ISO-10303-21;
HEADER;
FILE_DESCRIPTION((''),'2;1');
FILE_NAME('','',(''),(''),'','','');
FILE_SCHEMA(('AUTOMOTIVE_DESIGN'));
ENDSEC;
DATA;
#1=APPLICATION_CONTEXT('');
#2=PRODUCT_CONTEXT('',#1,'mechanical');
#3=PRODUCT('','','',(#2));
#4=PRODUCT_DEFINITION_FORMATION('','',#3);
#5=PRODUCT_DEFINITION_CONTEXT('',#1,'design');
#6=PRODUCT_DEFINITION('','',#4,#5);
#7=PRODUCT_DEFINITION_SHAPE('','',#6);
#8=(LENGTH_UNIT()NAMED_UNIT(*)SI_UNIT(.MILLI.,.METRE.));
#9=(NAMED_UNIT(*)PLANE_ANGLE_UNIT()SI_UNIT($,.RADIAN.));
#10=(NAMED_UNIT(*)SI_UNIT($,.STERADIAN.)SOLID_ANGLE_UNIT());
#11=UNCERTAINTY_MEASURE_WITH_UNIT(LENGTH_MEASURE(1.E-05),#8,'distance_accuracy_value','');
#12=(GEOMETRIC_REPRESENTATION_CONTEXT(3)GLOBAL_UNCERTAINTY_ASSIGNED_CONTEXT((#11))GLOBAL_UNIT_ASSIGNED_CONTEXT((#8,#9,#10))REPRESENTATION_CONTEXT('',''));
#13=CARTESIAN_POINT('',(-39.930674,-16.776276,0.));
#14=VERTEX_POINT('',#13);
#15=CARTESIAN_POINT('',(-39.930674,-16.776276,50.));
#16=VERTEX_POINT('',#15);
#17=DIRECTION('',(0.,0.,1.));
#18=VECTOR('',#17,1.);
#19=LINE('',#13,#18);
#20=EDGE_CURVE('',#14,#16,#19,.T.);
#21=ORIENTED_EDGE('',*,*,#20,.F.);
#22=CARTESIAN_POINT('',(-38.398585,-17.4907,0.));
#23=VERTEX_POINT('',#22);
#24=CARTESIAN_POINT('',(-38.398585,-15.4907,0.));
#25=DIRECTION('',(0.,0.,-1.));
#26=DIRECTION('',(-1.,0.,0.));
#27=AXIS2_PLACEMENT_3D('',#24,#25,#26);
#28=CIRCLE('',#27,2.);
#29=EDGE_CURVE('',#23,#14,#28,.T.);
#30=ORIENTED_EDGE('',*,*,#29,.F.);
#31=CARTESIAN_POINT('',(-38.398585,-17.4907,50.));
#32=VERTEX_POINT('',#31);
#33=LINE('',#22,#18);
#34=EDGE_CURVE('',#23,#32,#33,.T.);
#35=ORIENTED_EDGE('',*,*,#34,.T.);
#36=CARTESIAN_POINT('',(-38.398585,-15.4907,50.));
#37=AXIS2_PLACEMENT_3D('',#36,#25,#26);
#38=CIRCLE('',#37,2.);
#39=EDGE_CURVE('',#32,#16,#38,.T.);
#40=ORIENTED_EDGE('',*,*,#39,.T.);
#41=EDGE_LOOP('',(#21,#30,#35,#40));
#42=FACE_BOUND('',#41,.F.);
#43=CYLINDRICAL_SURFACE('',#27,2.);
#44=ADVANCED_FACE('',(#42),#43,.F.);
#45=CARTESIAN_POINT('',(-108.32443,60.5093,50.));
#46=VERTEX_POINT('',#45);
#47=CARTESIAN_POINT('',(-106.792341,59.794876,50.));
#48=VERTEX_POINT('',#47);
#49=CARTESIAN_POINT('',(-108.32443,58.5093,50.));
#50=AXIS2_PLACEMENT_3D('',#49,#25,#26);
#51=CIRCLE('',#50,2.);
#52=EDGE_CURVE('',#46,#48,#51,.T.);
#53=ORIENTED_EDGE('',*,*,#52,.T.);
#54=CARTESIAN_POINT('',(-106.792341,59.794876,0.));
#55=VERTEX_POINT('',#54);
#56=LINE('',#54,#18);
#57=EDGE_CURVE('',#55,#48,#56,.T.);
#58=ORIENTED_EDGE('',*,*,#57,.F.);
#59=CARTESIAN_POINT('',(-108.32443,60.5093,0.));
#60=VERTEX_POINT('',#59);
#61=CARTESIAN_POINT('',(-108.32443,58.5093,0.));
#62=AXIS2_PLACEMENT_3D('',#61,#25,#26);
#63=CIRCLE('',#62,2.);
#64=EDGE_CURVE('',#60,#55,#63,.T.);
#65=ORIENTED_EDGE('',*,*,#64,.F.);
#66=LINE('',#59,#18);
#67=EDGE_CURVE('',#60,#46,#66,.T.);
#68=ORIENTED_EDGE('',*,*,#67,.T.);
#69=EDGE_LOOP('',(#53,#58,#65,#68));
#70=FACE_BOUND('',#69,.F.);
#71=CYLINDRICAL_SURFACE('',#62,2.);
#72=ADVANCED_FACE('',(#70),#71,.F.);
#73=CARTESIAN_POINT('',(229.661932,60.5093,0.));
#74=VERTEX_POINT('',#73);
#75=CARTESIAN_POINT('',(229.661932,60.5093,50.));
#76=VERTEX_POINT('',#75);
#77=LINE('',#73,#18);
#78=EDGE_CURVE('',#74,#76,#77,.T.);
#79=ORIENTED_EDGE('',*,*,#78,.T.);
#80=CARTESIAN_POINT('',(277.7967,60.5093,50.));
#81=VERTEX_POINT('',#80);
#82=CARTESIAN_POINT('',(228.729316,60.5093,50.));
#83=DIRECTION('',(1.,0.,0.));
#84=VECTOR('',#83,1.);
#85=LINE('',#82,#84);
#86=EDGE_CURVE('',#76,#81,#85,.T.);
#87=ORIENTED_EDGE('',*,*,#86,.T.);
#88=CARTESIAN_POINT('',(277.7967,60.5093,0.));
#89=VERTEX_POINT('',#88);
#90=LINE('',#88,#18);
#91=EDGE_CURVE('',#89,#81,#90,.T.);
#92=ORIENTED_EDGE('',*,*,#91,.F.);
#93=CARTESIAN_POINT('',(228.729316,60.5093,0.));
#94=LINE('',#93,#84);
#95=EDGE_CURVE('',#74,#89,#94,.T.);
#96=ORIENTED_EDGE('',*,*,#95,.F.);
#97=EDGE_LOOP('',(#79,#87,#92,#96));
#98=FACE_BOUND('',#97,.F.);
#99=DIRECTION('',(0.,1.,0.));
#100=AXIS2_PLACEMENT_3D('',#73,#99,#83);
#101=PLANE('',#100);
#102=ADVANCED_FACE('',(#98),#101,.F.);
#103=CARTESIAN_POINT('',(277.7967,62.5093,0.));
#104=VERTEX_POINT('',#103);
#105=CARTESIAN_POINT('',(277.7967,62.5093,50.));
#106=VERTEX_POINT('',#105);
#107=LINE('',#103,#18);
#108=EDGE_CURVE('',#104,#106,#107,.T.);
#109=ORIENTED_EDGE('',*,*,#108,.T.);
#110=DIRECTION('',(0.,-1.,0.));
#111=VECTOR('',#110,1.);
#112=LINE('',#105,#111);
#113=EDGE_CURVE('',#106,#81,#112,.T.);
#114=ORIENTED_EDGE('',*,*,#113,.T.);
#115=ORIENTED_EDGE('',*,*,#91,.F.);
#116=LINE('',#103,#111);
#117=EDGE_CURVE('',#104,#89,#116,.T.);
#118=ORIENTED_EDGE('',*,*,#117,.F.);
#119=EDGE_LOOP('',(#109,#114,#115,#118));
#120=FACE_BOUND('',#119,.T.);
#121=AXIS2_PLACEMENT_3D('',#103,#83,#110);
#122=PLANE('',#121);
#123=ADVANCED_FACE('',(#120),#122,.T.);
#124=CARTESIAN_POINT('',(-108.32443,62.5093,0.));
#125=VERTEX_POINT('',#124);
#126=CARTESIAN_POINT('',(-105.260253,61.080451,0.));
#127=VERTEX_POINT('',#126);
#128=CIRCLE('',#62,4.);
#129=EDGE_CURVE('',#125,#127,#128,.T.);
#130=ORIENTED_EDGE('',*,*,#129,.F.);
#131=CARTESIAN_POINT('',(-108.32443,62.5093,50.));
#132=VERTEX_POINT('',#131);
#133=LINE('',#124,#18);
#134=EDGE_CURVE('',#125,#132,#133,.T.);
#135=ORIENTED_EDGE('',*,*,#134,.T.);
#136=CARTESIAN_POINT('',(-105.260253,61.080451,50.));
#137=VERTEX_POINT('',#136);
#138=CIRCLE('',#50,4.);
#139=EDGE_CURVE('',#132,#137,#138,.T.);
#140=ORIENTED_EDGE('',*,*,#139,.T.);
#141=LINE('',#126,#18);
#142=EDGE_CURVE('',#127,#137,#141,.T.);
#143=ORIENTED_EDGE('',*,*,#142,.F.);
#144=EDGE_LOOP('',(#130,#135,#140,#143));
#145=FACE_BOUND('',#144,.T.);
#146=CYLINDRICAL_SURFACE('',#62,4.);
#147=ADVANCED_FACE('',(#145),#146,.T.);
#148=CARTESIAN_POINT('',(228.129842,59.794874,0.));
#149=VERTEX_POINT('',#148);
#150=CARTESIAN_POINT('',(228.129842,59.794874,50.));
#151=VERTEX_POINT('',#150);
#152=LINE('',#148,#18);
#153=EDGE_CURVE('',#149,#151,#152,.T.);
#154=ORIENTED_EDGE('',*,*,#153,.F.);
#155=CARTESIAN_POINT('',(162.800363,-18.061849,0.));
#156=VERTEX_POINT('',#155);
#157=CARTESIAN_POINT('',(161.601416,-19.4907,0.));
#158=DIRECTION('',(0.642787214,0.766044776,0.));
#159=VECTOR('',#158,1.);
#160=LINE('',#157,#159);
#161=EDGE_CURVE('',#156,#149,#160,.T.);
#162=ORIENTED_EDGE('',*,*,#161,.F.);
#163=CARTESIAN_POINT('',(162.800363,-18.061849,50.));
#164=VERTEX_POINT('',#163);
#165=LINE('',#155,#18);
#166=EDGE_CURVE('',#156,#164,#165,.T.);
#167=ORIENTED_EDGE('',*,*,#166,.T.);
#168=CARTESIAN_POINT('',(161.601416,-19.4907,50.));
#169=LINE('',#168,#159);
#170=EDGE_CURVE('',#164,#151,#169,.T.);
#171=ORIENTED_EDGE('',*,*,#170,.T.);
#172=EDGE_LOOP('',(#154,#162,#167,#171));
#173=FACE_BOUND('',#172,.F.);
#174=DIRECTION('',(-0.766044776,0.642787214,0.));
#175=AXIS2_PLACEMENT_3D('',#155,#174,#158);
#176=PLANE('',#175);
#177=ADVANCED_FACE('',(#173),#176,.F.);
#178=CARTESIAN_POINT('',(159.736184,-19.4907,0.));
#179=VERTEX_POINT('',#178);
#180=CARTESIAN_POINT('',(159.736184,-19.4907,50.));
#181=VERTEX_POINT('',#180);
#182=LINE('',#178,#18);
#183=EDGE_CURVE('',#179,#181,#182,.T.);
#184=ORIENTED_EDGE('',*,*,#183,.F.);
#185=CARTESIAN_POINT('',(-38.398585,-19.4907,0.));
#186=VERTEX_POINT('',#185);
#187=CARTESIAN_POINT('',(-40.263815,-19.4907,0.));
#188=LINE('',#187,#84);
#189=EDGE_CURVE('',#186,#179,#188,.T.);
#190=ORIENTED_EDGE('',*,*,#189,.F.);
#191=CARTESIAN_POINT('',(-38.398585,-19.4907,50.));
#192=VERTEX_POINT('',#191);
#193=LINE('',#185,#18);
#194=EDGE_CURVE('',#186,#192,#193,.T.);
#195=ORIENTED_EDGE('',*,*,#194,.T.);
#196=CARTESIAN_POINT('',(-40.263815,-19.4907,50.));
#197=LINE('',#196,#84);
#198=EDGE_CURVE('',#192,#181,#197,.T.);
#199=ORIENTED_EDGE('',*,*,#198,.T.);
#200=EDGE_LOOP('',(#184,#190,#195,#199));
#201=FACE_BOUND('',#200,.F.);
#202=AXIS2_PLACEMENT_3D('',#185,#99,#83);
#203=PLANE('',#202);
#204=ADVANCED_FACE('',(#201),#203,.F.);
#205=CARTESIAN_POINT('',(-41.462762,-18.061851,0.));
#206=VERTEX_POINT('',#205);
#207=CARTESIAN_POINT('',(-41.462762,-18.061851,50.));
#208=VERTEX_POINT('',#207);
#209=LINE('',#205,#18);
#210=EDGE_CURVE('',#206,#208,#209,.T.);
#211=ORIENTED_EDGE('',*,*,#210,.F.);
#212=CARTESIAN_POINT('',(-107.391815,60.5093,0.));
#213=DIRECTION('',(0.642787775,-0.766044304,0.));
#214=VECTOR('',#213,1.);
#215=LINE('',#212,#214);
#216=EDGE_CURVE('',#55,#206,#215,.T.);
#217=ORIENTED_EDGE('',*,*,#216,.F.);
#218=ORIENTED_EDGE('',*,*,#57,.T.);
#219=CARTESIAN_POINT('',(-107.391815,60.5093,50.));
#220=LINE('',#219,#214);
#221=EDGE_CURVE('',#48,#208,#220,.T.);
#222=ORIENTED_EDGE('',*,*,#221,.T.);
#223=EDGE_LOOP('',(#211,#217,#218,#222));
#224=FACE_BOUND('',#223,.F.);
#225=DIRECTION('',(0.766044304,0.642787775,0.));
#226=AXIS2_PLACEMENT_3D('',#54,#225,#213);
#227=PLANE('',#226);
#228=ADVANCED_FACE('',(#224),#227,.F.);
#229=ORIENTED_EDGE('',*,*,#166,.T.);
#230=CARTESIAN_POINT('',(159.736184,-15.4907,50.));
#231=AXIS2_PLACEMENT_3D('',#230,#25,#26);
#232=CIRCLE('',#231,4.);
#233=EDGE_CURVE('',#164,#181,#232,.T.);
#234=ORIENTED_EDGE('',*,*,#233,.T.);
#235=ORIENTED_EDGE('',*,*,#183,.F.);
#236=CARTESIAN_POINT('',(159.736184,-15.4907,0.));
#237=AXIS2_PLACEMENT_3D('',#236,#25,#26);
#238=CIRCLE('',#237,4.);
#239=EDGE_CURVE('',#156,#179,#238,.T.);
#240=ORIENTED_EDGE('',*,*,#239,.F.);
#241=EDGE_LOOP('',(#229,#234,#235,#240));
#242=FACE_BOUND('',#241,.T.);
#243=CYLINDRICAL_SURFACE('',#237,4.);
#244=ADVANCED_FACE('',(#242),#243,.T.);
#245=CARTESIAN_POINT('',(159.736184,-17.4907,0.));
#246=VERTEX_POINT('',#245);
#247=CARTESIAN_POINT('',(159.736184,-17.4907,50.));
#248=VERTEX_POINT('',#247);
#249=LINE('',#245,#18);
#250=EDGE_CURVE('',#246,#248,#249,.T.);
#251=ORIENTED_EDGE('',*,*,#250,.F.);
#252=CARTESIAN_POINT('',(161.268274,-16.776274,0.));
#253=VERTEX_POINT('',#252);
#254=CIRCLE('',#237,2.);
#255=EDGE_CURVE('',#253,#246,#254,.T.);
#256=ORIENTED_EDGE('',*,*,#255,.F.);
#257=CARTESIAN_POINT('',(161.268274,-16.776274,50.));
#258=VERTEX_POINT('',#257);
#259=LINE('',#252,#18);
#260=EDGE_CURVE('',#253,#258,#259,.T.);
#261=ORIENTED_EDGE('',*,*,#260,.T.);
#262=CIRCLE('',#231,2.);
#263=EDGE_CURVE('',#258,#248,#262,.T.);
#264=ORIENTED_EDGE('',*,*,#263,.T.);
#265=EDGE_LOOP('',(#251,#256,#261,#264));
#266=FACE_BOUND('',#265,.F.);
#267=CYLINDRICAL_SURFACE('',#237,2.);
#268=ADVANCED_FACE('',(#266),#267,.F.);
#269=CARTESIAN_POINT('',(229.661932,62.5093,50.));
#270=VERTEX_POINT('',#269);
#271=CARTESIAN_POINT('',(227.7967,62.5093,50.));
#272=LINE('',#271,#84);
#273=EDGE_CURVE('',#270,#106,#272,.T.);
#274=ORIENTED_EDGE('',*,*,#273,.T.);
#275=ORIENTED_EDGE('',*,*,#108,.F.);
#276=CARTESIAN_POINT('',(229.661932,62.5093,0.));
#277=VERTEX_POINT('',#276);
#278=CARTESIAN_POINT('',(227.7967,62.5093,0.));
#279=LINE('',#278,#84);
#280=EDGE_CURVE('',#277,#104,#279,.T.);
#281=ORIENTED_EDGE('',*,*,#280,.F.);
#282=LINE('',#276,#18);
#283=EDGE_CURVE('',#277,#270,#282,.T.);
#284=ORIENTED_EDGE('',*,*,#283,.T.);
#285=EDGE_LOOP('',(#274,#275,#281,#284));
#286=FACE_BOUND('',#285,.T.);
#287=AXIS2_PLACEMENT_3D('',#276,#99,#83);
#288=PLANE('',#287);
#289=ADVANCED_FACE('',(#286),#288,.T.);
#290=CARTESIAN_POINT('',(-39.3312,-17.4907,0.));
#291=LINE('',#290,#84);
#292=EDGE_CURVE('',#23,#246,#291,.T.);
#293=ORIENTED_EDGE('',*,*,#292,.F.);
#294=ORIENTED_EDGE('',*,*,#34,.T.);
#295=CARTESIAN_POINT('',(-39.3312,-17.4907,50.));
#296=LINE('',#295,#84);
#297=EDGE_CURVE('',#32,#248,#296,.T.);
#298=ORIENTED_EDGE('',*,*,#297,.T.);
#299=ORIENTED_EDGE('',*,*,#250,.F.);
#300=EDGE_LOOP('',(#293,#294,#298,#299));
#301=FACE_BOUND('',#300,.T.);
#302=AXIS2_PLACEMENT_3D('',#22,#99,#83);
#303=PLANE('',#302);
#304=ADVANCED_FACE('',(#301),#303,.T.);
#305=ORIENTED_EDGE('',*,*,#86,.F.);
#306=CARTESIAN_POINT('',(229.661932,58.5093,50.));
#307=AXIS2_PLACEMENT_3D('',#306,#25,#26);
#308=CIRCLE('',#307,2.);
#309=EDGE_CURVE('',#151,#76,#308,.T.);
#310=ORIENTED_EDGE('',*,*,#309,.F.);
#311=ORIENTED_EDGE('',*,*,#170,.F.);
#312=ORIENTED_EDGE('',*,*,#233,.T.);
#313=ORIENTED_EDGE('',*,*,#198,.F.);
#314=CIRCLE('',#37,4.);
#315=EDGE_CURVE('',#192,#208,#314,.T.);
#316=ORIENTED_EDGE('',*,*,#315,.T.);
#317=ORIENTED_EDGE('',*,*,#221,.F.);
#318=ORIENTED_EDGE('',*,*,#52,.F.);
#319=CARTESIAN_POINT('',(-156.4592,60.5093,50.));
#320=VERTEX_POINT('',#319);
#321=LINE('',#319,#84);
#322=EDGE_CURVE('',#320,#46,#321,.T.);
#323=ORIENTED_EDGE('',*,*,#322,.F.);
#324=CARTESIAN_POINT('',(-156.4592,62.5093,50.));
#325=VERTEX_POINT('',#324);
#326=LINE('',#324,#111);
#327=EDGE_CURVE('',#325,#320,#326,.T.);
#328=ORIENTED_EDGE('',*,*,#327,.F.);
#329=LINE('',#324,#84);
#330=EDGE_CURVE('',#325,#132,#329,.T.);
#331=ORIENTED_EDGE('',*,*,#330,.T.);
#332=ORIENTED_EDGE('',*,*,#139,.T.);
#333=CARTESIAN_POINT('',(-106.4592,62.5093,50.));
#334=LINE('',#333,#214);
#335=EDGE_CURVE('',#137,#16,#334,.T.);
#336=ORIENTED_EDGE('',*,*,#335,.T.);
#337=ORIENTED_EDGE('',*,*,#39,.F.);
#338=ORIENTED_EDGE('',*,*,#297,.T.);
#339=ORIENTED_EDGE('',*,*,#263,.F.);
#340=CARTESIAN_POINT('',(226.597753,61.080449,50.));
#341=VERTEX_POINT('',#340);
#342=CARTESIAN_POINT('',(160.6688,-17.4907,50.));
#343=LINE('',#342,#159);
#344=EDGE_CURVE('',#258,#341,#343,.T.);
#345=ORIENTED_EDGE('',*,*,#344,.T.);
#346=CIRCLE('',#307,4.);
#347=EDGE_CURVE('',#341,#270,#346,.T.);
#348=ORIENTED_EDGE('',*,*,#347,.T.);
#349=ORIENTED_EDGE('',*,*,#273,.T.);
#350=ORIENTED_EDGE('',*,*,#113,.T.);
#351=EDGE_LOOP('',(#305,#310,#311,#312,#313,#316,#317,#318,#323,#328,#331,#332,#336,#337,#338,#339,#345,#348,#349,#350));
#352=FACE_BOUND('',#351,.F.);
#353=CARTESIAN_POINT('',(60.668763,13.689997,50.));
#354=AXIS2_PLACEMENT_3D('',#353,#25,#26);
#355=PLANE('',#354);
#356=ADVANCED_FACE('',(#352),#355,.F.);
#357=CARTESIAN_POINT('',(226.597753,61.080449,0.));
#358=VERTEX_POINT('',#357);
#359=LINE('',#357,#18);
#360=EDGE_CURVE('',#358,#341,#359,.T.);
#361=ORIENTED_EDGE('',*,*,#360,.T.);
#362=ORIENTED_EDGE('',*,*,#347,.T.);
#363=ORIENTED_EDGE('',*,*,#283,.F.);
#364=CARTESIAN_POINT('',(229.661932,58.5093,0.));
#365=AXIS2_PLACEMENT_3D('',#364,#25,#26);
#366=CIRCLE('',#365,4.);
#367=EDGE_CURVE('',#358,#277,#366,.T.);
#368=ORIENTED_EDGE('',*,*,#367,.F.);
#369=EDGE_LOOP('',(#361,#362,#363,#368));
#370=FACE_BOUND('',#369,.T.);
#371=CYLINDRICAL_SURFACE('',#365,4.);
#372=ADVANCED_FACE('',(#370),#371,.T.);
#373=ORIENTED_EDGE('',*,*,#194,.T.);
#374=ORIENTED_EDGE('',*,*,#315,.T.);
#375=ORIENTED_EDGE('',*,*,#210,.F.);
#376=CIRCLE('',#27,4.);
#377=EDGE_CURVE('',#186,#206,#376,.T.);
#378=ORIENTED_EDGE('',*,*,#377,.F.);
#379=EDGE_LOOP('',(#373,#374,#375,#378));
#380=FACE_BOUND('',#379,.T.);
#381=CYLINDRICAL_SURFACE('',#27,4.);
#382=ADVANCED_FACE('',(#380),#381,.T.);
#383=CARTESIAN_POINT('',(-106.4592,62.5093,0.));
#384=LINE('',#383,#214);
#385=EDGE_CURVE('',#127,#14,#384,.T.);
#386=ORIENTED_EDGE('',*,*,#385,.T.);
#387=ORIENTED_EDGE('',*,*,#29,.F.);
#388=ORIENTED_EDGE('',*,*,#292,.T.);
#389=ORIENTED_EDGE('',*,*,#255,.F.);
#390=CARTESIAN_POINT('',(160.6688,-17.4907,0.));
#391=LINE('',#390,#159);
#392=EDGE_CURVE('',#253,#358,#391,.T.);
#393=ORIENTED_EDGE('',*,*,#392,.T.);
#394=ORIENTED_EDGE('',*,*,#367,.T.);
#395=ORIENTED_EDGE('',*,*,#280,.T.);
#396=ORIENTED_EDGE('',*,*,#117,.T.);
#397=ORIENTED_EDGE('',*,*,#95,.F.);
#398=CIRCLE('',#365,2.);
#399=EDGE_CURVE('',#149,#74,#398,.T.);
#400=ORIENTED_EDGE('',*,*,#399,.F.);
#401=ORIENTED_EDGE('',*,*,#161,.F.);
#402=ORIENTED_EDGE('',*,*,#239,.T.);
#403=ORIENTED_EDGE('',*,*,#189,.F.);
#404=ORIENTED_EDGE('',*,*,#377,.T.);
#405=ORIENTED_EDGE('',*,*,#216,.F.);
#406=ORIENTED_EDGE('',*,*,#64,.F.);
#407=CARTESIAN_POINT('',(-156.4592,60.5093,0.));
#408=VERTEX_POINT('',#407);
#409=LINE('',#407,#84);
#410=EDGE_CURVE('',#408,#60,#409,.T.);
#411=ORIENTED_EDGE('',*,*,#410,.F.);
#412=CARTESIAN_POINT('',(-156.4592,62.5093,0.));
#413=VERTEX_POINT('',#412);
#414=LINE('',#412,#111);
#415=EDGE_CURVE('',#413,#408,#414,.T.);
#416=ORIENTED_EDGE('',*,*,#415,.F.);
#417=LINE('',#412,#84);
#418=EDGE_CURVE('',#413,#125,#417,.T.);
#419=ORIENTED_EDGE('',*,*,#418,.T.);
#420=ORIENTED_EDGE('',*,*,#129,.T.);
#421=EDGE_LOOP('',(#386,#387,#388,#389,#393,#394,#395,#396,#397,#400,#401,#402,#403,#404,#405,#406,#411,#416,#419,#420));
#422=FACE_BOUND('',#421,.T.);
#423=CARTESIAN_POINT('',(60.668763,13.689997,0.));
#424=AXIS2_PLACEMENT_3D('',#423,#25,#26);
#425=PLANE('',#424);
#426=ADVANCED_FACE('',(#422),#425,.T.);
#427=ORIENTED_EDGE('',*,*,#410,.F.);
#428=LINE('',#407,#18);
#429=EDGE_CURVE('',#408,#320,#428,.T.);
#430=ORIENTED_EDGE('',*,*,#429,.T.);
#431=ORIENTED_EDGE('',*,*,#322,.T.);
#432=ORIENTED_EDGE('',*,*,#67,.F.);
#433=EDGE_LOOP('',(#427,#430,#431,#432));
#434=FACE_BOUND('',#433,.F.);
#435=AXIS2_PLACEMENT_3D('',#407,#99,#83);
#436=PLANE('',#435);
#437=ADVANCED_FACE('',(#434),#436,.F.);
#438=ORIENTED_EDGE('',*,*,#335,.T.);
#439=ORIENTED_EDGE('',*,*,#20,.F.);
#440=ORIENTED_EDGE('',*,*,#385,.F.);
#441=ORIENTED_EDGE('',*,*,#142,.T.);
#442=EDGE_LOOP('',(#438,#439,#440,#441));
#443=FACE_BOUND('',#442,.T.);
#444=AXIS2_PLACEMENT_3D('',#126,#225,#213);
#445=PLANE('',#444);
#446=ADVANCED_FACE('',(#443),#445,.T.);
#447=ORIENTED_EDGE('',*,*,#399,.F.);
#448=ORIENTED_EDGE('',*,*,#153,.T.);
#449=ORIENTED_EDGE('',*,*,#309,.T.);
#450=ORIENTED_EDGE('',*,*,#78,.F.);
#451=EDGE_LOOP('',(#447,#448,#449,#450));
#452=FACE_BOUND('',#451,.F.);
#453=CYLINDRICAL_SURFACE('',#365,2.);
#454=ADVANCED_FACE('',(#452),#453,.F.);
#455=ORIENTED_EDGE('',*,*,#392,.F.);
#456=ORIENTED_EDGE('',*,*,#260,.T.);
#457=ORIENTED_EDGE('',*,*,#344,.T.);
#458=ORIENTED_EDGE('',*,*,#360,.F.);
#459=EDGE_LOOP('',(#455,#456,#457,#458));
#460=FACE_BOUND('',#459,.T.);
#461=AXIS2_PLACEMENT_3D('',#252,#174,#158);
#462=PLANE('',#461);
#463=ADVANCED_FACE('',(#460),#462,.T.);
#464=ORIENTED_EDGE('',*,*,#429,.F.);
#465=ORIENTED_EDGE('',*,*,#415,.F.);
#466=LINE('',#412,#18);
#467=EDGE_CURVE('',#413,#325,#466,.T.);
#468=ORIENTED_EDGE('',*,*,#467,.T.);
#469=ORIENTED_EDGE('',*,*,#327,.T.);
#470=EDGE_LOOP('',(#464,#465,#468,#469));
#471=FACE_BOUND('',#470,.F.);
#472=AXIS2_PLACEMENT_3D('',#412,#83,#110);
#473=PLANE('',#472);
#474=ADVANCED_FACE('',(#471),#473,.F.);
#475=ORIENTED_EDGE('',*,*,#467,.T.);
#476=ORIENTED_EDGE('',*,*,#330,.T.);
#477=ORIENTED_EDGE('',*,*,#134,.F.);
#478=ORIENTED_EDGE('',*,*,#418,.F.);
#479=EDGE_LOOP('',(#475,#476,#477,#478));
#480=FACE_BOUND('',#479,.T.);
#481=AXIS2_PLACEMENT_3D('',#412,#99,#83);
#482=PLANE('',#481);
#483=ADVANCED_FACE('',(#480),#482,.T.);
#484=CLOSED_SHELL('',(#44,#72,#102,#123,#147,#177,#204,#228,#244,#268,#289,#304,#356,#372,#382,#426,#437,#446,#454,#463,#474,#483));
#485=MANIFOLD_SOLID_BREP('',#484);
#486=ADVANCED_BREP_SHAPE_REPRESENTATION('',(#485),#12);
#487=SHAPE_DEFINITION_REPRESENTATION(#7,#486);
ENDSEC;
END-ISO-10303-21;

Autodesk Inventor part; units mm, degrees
ref_plane "YZ Plane" through (0, 0, 0) normal (1, 0, 0) x (0, 1, 0)
ref_plane "XZ Plane" through (0, 0, 0) normal (0, 1, 0) x (-1, 0, 0)
ref_plane "XY Plane" through (0, 0, 0) normal (0, 0, 1) x (1, 0, 0)
sketch "Sketch3" plane through (0, 0, 0) normal (0, 0, 1) x (1, 0, 0)
  line L0 (-156.4592, 62.5093) -> (-106.4592, 62.5093)
  line L1 (-106.4592, 62.5093) -> (-39.3312, -17.4907)
  line L2 (-39.3312, -17.4907) -> (160.6688, -17.4907)
  line L3 (160.6688, -17.4907) -> (227.7967, 62.5093)
  line L4 (227.7967, 62.5093) -> (277.7967, 62.5093)
  point P0 (0, 0)
  dimension "d0" = 50
  dimension "d1" = 50
  dimension "d2" = 200
  dimension "d3" = 130
  dimension "d4" = 130
  dimension "d5" = 80
contour flange "Contour Flange1" sketch "Sketch3" thickness 2 bend radius 2 width 50 along (0, 0, 1) mid plane no both sides no wall seen from (-131.4592, 62.5093, 0) lies toward (0, -1, 0) curves L0 L1 L2 L3 L4
bend "Bend1"
corner "Corner1"
equation "\"d4\" = d3"
equation "\"d6\" = BendReliefWidth"
equation "\"d7\" = BendReliefDepth"
equation "\"d8\" = MinimumRemnant"
equation "\"d9\" = BendRadius"
equation "\"d11\" = BendRadius"
equation "\"d13\" = CornerReliefSize"
equation "\"d14\" = GapSize"
equation "\"d15\" = JacobiRadiusSize"
equation "\"BendRadius\" = Thickness"
equation "\"BendReliefWidth\" = Thickness"
equation "\"BendReliefDepth\" = 0.5 * Thickness"
equation "\"CornerReliefSize\" = 4 * Thickness"
equation "\"MinimumRemnant\" = 2 * Thickness"
equation "\"TransitionRadius\" = BendRadius"
equation "\"JacobiRadiusSize\" = BendRadius"
equation "\"GapSize\" = Thickness"
equation "\"Thickness\" = 2"
properties part number "handle"
